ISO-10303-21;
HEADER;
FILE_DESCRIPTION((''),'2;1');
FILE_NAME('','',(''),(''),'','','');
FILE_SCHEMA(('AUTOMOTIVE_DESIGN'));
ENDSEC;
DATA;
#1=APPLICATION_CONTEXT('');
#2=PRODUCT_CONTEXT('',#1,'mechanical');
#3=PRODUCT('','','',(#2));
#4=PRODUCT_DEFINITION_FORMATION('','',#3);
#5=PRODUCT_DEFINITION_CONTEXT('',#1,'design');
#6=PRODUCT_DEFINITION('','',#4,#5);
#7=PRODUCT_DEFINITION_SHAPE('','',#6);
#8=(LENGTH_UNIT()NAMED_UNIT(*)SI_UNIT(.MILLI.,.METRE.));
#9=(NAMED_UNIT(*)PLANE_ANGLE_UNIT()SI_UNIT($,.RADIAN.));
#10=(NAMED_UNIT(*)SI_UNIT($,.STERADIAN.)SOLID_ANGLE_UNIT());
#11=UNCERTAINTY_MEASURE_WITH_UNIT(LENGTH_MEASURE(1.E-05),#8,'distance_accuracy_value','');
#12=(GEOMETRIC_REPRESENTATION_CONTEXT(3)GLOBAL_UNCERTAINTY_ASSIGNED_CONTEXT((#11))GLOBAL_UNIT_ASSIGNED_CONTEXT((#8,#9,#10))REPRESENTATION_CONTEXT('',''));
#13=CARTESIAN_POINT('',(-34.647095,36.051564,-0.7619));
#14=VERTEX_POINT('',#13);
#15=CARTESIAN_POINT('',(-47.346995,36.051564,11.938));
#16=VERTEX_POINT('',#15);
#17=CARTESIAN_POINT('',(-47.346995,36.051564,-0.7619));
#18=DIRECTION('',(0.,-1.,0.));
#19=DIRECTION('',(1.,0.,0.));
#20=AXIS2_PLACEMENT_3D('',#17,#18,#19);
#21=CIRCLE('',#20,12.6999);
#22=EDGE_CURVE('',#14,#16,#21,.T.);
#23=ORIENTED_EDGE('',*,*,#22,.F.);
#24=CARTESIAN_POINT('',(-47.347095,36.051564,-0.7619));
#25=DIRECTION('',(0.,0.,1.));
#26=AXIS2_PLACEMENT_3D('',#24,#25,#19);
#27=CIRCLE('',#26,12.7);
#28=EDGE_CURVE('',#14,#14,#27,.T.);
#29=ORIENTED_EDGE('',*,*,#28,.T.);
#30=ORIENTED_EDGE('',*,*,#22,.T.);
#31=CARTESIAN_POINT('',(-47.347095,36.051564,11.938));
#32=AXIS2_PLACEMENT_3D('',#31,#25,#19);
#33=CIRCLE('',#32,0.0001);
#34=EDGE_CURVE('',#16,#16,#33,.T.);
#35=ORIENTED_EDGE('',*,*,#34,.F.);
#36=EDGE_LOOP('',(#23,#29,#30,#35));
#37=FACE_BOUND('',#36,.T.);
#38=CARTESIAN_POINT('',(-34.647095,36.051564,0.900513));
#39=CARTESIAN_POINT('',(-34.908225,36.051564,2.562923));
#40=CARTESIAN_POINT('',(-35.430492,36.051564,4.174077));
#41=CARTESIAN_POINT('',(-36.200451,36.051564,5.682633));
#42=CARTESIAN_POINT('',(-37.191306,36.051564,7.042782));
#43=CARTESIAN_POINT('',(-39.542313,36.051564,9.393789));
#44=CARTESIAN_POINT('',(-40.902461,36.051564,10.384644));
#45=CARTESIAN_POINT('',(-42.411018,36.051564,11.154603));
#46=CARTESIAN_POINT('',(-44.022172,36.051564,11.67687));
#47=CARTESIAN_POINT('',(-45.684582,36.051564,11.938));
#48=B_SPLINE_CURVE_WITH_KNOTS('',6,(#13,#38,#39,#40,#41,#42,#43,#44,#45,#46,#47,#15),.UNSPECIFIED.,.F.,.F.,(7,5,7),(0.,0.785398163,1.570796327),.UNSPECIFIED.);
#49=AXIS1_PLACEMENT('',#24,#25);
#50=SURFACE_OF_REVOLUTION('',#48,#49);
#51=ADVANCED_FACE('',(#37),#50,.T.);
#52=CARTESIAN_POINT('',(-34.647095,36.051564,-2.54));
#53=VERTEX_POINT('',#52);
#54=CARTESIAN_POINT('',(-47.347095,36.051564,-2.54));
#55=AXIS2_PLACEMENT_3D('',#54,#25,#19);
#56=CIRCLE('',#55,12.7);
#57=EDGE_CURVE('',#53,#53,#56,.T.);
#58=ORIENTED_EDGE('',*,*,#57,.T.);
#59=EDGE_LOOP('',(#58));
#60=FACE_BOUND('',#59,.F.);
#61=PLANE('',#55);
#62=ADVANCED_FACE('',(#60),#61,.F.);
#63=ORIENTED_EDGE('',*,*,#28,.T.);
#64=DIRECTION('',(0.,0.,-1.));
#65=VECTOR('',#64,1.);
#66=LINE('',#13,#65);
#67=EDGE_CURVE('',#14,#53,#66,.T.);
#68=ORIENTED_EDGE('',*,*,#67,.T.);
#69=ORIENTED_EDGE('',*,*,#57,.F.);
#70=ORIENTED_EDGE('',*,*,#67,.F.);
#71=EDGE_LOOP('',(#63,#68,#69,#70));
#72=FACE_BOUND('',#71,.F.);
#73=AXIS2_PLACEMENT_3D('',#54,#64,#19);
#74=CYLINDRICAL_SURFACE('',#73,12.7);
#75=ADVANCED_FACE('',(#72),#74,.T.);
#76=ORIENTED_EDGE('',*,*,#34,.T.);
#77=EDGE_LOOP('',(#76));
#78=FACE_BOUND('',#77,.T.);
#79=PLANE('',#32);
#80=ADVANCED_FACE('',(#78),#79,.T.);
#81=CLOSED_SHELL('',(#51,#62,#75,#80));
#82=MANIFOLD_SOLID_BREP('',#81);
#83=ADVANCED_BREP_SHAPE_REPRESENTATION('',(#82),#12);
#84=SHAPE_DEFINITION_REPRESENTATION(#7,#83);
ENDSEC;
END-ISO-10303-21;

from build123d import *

# Parameters (mm, degrees)
F0_R          = 12.7
F1_DEPTH      = 11.938
F1_DEPTH_BACK = 2.54
F2_R          = 12.6999
F3_DEPTH      = 0.254


# Not quite as in the source:
# - a fillet or chamfer is up to 0.001 mm smaller than in the source, because OpenCascade refuses the exact size


with BuildPart() as f1:
    # F0 (on Top) → F1 (new body, two sides)
    with BuildSketch(Plane.XY) as f1_sk:
        with Locations((-47.3470948637, 36.0515639186)):
            Circle(F0_R)
    extrude(amount=F1_DEPTH)
    extrude(f1_sk.sketch, amount=-F1_DEPTH_BACK)

    # F2 (radius 12.7 in the source; OpenCascade refuses exactly that, so slightly less here)
    f2_edges = [f1.edges().sort_by_distance(p)[0] for p in [
        (-60.047095, 36.051564, 11.938),
    ]]
    fillet(f2_edges, radius=F2_R)

    # F3 (add): a face of the model
    f3_faces = [f1.faces().sort_by_distance(p)[0] for p in [
        (-47.3470948637, 36.0515639186, -2.54),
    ]]
    extrude(f3_faces, amount=-F3_DEPTH)


solid = f1.part
